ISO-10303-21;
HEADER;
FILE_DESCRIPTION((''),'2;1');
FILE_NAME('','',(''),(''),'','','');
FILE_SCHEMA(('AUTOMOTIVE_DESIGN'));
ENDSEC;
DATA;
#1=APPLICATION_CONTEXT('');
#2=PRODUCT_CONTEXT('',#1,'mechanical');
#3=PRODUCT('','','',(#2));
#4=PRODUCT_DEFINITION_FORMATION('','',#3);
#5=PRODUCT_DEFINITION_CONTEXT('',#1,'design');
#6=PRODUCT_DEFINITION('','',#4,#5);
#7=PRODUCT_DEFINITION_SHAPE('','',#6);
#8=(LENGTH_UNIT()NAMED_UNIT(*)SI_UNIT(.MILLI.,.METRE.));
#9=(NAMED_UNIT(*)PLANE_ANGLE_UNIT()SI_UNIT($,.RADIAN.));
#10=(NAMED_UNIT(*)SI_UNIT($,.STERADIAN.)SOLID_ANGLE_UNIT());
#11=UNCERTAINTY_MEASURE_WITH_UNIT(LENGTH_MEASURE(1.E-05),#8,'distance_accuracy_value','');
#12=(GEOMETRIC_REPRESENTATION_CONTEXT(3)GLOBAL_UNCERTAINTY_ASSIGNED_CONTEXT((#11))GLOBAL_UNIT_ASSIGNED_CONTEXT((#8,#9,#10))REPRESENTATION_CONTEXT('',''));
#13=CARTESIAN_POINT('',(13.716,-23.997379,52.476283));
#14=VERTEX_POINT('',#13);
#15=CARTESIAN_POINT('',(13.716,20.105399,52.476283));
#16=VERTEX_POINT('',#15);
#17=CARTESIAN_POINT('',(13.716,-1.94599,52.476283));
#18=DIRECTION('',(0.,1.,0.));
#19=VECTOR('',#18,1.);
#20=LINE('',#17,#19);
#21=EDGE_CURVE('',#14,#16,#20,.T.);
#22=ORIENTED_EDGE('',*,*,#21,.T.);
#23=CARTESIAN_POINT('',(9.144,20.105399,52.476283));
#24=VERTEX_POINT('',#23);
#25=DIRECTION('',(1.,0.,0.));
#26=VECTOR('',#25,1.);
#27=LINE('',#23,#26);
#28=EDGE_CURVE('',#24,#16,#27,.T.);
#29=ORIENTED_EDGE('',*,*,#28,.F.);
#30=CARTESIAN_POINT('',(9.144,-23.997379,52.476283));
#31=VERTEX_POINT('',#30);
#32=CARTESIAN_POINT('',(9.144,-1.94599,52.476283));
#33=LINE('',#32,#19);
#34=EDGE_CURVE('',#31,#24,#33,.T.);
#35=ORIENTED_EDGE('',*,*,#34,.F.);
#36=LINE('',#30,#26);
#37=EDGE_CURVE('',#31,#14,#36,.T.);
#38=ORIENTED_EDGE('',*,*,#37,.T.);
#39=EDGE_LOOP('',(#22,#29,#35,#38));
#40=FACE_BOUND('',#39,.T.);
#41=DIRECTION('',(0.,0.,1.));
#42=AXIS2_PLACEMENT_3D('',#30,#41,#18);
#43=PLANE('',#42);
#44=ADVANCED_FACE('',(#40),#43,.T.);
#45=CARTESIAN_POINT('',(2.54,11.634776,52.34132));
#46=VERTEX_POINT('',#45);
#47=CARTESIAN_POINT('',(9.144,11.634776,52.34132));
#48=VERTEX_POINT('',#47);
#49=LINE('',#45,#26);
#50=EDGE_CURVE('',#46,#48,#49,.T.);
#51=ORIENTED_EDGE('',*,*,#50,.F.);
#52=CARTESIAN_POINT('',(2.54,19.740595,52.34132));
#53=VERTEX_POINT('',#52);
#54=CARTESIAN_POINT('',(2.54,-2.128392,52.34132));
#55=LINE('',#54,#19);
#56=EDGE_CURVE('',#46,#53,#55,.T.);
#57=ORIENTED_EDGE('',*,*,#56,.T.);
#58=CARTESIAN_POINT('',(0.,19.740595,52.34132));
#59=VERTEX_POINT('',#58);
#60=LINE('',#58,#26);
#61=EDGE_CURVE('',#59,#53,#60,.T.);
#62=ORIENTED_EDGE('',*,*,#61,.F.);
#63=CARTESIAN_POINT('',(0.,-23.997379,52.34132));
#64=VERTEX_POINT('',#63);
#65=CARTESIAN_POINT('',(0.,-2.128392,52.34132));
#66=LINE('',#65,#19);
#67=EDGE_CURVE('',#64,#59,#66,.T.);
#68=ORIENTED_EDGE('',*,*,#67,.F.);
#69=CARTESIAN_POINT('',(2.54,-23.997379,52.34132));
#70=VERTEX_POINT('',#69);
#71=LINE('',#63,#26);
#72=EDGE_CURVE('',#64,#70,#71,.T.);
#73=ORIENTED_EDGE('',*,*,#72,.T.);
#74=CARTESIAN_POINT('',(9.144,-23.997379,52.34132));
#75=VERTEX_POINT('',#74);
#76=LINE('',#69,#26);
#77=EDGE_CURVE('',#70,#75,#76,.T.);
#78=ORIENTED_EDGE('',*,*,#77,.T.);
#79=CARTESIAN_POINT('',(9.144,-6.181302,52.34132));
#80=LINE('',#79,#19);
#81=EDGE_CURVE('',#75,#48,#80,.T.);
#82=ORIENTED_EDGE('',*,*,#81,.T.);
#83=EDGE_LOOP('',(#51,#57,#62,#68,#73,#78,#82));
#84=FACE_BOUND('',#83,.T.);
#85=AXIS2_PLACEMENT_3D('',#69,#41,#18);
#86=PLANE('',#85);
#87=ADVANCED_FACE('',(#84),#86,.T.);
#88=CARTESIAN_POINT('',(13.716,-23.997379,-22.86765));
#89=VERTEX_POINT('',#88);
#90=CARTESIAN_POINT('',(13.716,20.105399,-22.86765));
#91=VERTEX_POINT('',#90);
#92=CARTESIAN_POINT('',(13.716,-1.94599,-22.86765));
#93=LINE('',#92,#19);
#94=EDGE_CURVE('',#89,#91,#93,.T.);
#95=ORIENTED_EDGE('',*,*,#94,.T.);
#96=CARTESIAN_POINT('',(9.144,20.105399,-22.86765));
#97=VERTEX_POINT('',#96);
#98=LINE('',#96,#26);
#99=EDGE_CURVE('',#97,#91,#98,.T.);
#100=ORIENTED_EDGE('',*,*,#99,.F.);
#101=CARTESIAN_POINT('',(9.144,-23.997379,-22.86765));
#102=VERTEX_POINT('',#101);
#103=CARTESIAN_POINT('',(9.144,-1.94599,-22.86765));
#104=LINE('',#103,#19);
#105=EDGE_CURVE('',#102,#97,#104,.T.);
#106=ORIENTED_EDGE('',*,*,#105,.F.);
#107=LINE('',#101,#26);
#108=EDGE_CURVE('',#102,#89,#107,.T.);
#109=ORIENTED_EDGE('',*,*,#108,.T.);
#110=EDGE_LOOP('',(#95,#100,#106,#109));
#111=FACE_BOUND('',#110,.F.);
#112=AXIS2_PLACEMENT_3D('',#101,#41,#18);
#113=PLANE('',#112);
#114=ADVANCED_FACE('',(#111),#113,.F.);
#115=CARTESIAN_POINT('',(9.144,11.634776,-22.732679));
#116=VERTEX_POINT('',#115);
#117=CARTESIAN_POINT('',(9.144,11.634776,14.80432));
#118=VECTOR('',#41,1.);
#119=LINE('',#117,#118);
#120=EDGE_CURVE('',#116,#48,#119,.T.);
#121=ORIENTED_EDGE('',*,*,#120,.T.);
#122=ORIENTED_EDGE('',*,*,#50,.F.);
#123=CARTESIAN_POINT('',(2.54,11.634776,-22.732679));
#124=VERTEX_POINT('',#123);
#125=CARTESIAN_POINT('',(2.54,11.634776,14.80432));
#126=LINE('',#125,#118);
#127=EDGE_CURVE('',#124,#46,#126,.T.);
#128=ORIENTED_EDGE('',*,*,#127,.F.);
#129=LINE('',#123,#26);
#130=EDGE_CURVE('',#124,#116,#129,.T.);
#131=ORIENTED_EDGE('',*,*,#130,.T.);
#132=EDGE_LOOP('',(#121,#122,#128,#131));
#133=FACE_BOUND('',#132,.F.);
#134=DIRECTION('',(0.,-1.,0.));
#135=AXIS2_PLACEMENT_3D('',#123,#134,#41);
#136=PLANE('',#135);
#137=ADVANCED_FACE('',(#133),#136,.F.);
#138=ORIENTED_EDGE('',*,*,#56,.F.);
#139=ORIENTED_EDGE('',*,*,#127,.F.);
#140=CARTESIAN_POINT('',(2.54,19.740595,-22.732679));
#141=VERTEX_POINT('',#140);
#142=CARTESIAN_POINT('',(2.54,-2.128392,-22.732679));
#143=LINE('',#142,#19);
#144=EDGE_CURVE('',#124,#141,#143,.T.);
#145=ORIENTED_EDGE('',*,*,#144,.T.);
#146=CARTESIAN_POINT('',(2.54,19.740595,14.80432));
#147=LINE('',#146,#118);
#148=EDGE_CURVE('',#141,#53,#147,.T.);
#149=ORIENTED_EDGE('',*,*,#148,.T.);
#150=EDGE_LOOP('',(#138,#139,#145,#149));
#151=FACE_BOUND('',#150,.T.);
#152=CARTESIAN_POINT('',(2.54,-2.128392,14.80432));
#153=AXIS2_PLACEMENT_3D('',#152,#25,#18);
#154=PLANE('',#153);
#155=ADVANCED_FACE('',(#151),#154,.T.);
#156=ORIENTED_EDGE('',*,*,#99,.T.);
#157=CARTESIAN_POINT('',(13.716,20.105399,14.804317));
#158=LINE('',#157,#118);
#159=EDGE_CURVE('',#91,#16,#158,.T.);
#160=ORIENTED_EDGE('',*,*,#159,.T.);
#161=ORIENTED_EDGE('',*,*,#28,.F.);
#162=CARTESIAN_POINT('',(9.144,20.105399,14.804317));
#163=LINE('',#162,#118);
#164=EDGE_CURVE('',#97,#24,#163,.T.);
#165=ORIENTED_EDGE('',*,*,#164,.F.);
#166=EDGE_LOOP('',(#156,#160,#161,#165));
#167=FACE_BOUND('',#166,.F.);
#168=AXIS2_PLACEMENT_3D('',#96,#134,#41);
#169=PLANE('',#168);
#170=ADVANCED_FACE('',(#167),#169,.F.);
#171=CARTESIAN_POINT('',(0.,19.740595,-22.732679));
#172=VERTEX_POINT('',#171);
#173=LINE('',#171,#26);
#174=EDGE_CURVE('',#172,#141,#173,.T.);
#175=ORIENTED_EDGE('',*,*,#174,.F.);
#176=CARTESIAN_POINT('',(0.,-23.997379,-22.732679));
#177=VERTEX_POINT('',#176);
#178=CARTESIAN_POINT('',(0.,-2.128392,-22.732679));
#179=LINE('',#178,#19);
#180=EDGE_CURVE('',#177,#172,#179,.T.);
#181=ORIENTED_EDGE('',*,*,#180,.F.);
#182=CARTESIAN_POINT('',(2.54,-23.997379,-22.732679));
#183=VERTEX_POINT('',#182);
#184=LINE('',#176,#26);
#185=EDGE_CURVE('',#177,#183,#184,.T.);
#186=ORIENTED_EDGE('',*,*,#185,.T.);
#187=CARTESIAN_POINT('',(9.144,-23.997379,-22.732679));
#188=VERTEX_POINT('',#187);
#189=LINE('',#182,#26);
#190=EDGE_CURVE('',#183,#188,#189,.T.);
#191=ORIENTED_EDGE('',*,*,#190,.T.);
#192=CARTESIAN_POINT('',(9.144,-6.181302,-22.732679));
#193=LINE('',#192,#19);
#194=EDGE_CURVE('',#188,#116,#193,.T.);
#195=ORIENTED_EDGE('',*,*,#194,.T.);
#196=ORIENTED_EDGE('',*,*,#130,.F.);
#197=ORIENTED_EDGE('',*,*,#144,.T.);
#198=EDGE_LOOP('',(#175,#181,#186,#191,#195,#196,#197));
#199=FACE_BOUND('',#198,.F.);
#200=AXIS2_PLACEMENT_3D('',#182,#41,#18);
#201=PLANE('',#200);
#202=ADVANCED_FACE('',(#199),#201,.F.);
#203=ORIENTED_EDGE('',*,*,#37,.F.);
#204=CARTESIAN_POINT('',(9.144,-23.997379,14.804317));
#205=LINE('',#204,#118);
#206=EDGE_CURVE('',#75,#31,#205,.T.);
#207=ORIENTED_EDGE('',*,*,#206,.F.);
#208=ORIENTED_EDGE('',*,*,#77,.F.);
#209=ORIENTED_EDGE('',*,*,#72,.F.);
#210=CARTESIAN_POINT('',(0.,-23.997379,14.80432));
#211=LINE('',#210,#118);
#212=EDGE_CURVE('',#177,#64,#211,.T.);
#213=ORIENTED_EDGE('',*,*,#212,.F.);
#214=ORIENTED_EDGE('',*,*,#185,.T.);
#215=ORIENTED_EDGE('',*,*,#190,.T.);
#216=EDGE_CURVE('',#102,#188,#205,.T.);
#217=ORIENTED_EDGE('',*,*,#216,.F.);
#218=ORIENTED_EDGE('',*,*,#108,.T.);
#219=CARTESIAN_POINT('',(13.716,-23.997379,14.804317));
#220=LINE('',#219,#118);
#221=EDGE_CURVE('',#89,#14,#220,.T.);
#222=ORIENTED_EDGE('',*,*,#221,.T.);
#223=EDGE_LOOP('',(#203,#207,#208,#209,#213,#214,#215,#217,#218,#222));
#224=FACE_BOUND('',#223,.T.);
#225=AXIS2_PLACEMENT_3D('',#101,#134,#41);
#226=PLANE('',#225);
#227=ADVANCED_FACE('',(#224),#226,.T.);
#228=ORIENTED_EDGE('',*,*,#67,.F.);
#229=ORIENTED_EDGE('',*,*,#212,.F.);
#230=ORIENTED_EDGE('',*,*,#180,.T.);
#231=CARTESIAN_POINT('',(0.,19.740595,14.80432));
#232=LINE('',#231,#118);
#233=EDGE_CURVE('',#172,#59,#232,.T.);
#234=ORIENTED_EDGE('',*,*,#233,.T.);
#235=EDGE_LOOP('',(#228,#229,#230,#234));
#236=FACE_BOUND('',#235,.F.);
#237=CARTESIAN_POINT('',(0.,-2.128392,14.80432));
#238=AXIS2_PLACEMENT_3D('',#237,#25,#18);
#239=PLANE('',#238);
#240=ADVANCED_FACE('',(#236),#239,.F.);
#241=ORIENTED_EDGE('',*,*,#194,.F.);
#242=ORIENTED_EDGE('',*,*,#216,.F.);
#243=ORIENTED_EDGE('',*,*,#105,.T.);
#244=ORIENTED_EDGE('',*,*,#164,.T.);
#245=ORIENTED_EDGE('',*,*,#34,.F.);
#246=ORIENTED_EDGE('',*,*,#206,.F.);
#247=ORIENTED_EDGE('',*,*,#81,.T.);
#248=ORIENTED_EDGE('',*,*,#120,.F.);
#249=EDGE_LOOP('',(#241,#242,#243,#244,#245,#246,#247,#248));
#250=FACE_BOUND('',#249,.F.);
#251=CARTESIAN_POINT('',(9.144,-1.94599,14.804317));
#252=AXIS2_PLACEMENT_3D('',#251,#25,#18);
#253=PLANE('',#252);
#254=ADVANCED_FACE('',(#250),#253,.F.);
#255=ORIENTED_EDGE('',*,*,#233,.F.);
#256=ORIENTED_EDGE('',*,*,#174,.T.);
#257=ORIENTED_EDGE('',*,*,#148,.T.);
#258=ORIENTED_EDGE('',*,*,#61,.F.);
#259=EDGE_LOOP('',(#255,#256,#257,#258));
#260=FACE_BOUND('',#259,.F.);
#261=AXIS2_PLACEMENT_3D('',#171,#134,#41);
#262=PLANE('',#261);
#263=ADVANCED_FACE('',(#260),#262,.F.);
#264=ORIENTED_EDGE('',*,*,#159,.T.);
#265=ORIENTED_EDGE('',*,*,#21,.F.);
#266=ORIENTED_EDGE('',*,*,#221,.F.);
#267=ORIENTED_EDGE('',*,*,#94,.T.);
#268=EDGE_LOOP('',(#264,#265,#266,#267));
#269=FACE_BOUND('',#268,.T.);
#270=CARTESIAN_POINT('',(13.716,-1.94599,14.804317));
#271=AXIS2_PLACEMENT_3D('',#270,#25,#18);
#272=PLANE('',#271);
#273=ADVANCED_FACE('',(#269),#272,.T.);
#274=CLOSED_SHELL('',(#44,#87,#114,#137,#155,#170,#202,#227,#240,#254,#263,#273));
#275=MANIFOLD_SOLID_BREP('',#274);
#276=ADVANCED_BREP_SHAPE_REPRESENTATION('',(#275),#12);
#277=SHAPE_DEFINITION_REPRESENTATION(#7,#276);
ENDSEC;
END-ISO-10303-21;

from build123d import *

# Parameters (mm, degrees)
F0_W     = 43.7379740179
F0_H     = 75.0739984214
F1_DEPTH = 2.54
F2_W     = 35.6321558356
F2_H     = 75.0739984214
F3_DEPTH = 6.604
F4_W     = 44.1027786583
F4_H     = 75.3439329565
F5_DEPTH = 4.572


# Not quite as in the source:
# - the program builds the solid bodies; features that only make, move or delete a surface that nothing else refers to are left out


with BuildPart() as f1:
    # F0 (on Right) → F1 (new body)
    with BuildSketch(Plane.YZ):
        with Locations((-2.128392458, 14.8043204099)):
            Rectangle(F0_W, F0_H)
    extrude(amount=F1_DEPTH)

    # F2 (on face) → F3 (join)
    with BuildSketch(Plane.YZ.offset(2.54)):
        with Locations((-6.1813015491, 14.8043204099)):
            Rectangle(F2_W, F2_H)
    extrude(amount=F3_DEPTH)

    # F4 (on face) → F5 (join)
    with BuildSketch(Plane.YZ.offset(9.144)):
        with Locations((-1.9459901378, 14.8043166846)):
            Rectangle(F4_W, F4_H)
    extrude(amount=F5_DEPTH)


solid = f1.part
